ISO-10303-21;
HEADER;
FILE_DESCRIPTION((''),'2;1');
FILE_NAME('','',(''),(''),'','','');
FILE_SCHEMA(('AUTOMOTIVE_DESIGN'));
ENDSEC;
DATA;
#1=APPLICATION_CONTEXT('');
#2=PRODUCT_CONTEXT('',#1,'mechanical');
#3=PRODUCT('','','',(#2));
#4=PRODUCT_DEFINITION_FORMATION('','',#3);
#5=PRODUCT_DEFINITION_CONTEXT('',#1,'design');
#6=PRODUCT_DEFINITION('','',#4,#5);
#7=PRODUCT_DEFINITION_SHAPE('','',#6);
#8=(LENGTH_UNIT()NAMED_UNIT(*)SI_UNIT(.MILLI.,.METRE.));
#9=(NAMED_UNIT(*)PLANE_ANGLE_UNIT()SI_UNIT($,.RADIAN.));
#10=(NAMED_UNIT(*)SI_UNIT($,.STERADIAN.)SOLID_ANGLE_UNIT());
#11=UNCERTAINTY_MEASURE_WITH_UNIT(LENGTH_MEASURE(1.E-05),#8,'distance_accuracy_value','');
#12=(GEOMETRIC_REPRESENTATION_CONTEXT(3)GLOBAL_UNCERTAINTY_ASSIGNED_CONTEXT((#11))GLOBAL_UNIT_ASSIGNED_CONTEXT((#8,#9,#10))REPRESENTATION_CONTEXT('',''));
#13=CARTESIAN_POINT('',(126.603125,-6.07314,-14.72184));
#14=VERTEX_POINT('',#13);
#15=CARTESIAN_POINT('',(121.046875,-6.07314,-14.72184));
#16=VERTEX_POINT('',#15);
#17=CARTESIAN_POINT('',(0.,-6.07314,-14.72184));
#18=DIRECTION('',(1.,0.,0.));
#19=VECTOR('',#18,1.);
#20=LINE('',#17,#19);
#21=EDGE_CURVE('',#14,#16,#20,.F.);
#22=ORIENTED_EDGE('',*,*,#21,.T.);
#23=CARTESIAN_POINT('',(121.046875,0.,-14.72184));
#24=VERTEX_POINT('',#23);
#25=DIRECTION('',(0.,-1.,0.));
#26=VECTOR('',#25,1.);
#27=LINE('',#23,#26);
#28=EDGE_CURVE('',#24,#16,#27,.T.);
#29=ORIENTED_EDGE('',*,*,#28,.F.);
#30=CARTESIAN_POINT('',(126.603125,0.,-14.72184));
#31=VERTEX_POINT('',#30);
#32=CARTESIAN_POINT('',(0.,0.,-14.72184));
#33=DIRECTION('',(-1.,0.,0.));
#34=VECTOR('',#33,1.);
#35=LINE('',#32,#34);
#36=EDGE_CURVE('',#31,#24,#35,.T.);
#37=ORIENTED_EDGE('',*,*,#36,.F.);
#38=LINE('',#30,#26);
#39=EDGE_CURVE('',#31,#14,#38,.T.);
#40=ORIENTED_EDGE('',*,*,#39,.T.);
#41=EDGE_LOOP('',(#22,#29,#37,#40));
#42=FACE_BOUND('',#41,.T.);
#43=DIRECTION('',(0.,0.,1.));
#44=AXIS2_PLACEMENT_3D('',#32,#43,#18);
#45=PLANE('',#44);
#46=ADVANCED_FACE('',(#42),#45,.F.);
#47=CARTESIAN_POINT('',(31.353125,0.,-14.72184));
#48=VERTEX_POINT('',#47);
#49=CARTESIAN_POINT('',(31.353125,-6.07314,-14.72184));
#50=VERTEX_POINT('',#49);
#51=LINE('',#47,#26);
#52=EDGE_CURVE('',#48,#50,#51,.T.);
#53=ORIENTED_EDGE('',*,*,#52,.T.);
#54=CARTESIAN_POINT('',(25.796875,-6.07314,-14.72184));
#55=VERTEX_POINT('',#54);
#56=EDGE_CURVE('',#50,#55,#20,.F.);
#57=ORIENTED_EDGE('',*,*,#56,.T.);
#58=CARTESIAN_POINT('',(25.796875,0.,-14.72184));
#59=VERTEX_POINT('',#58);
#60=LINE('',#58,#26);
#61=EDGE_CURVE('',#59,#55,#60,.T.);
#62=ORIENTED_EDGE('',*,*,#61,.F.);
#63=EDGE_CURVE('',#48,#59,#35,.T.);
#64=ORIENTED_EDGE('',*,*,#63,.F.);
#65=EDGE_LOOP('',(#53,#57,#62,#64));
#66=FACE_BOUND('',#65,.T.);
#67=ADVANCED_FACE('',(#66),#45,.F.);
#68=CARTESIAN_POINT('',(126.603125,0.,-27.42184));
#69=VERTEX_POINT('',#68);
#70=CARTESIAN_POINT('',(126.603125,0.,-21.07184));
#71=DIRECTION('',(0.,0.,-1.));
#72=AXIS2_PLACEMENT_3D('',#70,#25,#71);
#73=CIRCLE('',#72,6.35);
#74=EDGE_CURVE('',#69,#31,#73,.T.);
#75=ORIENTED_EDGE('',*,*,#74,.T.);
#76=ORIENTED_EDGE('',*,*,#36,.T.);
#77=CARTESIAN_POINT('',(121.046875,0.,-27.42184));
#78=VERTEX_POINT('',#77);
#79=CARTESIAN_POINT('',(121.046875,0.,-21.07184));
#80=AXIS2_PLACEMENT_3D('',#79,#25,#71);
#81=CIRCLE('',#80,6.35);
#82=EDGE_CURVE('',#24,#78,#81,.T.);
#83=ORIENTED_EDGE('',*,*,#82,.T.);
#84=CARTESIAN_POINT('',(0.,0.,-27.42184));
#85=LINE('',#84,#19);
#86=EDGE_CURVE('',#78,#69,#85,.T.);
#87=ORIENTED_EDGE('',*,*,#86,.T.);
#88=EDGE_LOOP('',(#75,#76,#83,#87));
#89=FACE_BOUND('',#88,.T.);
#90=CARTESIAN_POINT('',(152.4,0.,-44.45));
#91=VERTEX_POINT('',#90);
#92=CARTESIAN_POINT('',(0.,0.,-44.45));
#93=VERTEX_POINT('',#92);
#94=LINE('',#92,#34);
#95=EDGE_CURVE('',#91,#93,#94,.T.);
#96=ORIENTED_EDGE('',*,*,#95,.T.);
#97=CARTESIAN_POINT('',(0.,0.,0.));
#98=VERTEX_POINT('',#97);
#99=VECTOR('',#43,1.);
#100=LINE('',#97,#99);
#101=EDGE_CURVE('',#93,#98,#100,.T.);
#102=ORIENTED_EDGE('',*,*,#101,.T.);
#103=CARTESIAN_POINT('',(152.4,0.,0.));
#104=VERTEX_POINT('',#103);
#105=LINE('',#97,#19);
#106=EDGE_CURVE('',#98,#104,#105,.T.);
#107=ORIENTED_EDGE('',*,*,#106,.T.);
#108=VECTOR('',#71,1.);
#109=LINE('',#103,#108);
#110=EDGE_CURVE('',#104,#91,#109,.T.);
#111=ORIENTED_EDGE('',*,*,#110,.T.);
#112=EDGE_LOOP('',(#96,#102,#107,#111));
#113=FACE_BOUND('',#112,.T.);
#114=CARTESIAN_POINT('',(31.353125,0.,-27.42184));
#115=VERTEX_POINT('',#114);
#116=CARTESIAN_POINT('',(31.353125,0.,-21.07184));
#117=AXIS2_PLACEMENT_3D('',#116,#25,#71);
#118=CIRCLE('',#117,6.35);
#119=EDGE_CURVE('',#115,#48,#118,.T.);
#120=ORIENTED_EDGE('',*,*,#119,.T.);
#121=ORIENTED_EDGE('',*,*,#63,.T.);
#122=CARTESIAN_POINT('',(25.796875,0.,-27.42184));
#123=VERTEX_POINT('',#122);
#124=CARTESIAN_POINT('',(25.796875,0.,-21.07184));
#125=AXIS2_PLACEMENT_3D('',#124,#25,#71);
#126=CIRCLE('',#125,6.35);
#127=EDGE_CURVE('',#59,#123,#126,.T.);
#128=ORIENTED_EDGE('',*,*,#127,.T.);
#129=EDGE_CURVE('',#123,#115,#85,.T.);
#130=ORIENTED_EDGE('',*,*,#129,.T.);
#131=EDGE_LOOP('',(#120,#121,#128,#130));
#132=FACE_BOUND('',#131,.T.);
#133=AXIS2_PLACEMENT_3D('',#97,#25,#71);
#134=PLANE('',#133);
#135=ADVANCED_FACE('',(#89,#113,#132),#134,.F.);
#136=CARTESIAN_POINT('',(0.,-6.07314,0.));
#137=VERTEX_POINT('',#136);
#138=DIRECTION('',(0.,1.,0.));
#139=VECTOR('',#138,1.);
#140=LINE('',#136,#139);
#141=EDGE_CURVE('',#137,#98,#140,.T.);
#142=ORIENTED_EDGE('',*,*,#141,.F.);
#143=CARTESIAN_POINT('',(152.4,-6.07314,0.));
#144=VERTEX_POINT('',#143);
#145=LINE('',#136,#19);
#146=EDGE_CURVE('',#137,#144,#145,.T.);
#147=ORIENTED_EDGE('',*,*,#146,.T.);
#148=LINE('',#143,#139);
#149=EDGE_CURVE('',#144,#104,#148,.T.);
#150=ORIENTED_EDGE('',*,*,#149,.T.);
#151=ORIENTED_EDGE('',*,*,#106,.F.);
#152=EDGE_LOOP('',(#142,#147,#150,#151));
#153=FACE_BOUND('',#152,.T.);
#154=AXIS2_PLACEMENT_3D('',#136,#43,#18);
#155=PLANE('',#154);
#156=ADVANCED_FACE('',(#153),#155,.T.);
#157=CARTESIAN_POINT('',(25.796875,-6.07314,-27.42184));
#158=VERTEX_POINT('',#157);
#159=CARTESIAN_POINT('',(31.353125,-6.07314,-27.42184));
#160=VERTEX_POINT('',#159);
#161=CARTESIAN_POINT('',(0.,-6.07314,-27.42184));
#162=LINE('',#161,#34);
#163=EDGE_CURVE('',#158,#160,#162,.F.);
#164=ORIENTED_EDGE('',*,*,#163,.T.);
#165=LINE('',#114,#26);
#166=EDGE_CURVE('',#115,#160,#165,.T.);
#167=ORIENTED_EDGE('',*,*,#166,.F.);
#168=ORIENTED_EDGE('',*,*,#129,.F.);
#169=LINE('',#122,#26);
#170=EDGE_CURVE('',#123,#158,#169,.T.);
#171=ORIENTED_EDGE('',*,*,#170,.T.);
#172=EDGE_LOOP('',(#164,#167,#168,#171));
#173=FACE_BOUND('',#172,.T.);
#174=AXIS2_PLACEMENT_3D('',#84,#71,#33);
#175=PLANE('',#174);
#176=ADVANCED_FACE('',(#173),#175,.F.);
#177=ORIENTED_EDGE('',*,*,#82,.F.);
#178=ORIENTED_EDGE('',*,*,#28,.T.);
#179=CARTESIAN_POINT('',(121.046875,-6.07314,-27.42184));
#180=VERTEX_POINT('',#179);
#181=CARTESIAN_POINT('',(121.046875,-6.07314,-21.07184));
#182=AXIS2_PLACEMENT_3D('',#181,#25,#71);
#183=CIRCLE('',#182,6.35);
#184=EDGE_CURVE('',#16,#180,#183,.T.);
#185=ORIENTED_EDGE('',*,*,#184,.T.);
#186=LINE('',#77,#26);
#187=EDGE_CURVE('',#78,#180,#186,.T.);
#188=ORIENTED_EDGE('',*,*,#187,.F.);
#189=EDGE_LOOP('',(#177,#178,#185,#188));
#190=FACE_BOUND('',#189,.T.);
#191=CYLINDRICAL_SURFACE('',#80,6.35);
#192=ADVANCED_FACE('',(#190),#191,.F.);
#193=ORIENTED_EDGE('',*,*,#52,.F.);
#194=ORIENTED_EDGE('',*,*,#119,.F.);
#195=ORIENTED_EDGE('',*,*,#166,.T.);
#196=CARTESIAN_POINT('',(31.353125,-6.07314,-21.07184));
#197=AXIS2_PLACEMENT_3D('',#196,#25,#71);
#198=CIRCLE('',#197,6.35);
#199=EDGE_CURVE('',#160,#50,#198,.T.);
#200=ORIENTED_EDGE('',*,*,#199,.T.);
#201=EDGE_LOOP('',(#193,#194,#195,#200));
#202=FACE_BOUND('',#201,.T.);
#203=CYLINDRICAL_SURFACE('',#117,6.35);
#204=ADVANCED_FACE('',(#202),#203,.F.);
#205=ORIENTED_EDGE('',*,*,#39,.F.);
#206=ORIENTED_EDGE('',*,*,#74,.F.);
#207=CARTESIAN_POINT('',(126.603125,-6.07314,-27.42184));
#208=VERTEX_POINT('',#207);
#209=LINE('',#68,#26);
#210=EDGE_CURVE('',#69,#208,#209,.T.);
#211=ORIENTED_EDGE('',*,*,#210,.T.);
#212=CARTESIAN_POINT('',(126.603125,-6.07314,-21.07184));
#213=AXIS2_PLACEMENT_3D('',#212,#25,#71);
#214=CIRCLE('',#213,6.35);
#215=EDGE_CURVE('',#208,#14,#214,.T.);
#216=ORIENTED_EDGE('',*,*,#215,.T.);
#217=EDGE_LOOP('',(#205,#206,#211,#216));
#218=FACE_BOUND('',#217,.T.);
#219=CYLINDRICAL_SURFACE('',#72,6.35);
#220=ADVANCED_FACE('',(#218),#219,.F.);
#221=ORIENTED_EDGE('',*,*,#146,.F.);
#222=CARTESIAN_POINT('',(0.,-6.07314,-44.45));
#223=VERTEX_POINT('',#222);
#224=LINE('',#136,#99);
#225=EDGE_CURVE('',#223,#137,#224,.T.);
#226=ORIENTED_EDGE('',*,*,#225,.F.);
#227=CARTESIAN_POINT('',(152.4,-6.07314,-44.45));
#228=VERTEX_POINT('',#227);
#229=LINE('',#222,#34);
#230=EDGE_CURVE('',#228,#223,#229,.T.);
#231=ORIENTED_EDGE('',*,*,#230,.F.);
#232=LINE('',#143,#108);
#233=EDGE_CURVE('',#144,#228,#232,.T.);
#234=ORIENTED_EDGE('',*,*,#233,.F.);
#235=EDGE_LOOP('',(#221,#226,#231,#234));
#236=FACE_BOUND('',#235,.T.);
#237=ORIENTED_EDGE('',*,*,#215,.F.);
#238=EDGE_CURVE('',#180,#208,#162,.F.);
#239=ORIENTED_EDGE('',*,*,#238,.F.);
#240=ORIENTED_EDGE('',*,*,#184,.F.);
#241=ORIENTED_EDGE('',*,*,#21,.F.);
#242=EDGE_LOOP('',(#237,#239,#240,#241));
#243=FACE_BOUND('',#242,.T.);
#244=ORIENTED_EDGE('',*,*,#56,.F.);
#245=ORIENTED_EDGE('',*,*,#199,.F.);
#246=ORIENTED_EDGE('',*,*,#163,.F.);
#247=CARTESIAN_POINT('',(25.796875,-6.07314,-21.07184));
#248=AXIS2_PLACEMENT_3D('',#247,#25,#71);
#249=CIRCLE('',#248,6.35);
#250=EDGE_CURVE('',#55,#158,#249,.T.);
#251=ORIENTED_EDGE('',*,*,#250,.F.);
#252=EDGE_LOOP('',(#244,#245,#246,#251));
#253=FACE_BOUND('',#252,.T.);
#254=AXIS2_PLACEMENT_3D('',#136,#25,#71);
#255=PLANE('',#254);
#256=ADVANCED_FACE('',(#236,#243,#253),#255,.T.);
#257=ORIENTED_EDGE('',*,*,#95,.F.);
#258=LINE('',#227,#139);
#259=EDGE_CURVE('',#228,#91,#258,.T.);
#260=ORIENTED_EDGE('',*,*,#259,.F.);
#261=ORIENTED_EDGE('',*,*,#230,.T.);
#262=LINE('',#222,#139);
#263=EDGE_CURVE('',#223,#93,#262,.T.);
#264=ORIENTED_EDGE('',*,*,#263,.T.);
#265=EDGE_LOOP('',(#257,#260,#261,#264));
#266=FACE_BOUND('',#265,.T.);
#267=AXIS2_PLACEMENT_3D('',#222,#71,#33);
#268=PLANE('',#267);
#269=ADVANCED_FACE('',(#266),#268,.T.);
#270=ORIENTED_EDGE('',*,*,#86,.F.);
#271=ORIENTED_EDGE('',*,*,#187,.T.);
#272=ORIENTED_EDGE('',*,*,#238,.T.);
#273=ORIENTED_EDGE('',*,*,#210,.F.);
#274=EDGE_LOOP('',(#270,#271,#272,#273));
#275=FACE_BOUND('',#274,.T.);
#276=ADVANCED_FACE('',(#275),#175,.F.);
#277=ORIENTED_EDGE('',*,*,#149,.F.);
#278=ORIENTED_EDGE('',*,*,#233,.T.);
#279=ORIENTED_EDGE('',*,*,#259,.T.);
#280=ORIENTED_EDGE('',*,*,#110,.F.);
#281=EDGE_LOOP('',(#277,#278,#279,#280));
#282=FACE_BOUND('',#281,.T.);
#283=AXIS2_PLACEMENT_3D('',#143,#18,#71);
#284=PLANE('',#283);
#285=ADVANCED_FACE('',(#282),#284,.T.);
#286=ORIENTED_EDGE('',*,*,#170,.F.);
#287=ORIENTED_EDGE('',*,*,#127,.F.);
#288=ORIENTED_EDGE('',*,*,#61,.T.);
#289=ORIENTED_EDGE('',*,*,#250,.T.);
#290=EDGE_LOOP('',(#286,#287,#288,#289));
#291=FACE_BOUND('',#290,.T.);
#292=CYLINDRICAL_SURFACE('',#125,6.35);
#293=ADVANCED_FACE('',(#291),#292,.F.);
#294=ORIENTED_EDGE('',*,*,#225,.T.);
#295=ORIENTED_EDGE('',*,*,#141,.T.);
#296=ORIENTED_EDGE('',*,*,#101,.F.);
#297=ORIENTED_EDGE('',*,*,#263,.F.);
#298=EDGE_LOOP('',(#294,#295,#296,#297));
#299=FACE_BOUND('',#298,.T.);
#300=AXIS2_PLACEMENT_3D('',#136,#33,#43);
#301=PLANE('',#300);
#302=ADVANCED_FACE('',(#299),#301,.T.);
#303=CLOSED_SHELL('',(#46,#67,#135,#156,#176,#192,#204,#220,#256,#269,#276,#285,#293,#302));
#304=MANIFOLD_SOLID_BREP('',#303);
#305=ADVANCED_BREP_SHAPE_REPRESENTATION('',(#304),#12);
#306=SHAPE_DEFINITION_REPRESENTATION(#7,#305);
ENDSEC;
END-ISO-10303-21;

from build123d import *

# Parameters (mm, degrees)
SKETCH2_W               = 152.4
SKETCH2_H               = 44.45
BASE_FLANGE1_DEPTH      = 6.07314
CUT_EXTRUDE1_DEPTH      = 159.86612455
CUT_EXTRUDE1_DEPTH_BACK = 159.86612455


# Sheet-metal steps are written as plain solids
with BuildPart() as part:
    # Sketch2 → Base-Flange1 (new body)
    with BuildSketch(Plane(origin=(0, 0, 0), x_dir=(1, 0, 0), z_dir=(0, 1, 0))):
        with Locations((76.2, 22.225)):
            Rectangle(SKETCH2_W, SKETCH2_H)
    extrude(amount=-BASE_FLANGE1_DEPTH)

    # Sketch7 → Cut-Extrude1 (cut, two sides: drawn at the far end of the back side and taken through both)
    with BuildSketch(Plane.XZ.offset(6.07314).offset(-CUT_EXTRUDE1_DEPTH_BACK)):
        with BuildLine():
            Line((121.046875, -27.42184), (126.603125, -27.42184))
            ThreePointArc((126.603125, -27.42184), (132.953125, -21.07184), (126.603125, -14.72184))
            Line((126.603125, -14.72184), (121.046875, -14.72184))
            ThreePointArc((121.046875, -14.72184), (114.696875, -21.07184), (121.046875, -27.42184))
        make_face()
        with BuildLine():
            Line((31.353125, -14.72184), (25.796875, -14.72184))
            ThreePointArc((25.796875, -14.72184), (19.446875, -21.07184), (25.796875, -27.42184))
            Line((25.796875, -27.42184), (31.353125, -27.42184))
            ThreePointArc((31.353125, -27.42184), (37.703125, -21.07184), (31.353125, -14.72184))
        make_face()
    extrude(amount=CUT_EXTRUDE1_DEPTH + CUT_EXTRUDE1_DEPTH_BACK, mode=Mode.SUBTRACT)


solid = part.part
